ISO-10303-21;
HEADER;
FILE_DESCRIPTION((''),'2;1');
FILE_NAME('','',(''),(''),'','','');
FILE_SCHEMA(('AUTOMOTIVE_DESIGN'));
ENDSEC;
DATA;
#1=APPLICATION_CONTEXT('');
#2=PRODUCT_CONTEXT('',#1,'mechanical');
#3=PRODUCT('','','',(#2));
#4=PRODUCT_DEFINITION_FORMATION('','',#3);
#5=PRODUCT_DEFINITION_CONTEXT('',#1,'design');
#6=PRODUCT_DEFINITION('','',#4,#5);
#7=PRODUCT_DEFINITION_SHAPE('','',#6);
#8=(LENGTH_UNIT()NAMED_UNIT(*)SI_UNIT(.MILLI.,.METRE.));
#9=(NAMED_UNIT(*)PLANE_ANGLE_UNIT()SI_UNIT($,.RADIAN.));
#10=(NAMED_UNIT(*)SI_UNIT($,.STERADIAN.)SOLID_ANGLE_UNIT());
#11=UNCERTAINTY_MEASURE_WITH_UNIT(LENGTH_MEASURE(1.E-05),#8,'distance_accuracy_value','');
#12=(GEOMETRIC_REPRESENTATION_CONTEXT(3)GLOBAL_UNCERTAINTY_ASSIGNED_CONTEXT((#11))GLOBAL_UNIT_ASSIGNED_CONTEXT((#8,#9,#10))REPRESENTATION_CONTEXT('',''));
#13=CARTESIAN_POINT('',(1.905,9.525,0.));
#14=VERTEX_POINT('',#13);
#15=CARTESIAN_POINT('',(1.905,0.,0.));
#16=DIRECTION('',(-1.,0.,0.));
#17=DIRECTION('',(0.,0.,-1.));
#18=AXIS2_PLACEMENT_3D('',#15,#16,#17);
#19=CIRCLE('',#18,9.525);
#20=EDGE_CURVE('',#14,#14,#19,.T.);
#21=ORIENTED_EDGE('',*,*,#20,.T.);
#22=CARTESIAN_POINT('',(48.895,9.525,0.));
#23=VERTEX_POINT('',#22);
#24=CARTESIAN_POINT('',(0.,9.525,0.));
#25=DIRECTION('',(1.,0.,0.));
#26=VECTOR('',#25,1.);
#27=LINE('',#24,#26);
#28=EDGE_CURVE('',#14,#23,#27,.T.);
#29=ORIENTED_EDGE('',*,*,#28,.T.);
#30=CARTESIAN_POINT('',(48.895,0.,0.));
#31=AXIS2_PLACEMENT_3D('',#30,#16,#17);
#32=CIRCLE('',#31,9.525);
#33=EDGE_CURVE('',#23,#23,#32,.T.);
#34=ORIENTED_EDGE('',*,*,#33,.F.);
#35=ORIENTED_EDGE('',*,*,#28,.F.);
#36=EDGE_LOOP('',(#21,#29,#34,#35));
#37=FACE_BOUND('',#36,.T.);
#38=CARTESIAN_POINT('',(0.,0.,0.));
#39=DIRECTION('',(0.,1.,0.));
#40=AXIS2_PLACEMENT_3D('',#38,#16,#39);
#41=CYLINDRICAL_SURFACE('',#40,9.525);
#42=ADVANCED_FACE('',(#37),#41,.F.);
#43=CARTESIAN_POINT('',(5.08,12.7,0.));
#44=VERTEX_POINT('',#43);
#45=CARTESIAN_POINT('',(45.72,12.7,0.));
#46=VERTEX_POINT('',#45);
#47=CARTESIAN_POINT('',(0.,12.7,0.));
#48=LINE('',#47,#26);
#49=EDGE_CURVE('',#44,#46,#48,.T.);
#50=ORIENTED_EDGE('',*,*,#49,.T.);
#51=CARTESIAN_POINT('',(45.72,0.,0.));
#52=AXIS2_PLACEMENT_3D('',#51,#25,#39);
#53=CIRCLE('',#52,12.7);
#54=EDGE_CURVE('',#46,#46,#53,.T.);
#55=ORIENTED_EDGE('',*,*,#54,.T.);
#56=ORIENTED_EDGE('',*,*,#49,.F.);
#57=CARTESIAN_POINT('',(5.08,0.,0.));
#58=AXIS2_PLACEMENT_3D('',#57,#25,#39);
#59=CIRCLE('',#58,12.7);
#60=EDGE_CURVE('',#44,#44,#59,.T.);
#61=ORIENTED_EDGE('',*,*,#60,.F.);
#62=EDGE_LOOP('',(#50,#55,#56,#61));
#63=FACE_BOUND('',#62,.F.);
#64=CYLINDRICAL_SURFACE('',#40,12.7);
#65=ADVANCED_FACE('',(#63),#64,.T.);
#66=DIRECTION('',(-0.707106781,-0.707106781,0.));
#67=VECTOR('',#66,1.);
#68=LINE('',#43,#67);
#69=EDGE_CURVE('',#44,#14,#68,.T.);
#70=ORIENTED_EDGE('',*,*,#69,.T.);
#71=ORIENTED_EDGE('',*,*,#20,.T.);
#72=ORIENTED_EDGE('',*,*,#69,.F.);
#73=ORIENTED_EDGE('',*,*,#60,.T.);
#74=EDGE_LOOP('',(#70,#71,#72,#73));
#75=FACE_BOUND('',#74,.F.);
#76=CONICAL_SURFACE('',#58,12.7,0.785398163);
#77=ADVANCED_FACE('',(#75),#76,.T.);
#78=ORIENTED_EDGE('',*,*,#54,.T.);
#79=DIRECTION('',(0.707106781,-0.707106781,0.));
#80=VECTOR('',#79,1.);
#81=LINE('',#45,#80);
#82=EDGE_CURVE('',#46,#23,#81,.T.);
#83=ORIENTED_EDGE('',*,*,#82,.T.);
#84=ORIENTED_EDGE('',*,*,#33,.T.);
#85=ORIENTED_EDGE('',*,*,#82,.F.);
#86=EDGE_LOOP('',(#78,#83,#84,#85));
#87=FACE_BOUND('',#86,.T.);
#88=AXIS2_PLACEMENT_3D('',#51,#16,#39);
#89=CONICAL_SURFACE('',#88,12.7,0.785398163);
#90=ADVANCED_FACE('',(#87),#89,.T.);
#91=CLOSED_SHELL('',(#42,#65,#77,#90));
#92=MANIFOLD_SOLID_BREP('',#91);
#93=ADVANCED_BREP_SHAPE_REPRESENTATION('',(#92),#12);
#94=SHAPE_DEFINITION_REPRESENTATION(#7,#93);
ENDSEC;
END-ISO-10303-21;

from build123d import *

# Parameters (mm, degrees)
F0_R     = 12.7
F0_R_2   = 9.525
F1_DEPTH = 50.8


# Not quite as in the source:
# - a fillet or chamfer that OpenCascade refuses, or shapes differently, is made with other operations: its cross-section is extruded or revolved along the edge and cut away or added


with BuildPart() as f1:
    # F0 (on Right) → F1 (new body)
    with BuildSketch(Plane.YZ):
        Circle(F0_R)
        Circle(F0_R_2, mode=Mode.SUBTRACT)
    extrude(amount=F1_DEPTH)

    # F2: chamfer of 5.08 on 3 edges, made by hand

    # F2_s1 → F2_t2 (revolve, cut)
    with BuildSketch(Plane.XY):
        Polygon((45.72, 12.7), (50.8, 7.62), (50.8, 12.7), align=None)
    revolve(axis=Axis((50.8, 0, 0), (1, 0, 0)), mode=Mode.SUBTRACT)

    # F2_s3 → F2_t4 (revolve, cut)
    with BuildSketch(Plane.XY):
        Polygon((5.08, 12.7), (0, 7.62), (0, 12.7), align=None)
    revolve(axis=Axis((0, 0, 0), (1, 0, 0)), mode=Mode.SUBTRACT)


solid = f1.part
